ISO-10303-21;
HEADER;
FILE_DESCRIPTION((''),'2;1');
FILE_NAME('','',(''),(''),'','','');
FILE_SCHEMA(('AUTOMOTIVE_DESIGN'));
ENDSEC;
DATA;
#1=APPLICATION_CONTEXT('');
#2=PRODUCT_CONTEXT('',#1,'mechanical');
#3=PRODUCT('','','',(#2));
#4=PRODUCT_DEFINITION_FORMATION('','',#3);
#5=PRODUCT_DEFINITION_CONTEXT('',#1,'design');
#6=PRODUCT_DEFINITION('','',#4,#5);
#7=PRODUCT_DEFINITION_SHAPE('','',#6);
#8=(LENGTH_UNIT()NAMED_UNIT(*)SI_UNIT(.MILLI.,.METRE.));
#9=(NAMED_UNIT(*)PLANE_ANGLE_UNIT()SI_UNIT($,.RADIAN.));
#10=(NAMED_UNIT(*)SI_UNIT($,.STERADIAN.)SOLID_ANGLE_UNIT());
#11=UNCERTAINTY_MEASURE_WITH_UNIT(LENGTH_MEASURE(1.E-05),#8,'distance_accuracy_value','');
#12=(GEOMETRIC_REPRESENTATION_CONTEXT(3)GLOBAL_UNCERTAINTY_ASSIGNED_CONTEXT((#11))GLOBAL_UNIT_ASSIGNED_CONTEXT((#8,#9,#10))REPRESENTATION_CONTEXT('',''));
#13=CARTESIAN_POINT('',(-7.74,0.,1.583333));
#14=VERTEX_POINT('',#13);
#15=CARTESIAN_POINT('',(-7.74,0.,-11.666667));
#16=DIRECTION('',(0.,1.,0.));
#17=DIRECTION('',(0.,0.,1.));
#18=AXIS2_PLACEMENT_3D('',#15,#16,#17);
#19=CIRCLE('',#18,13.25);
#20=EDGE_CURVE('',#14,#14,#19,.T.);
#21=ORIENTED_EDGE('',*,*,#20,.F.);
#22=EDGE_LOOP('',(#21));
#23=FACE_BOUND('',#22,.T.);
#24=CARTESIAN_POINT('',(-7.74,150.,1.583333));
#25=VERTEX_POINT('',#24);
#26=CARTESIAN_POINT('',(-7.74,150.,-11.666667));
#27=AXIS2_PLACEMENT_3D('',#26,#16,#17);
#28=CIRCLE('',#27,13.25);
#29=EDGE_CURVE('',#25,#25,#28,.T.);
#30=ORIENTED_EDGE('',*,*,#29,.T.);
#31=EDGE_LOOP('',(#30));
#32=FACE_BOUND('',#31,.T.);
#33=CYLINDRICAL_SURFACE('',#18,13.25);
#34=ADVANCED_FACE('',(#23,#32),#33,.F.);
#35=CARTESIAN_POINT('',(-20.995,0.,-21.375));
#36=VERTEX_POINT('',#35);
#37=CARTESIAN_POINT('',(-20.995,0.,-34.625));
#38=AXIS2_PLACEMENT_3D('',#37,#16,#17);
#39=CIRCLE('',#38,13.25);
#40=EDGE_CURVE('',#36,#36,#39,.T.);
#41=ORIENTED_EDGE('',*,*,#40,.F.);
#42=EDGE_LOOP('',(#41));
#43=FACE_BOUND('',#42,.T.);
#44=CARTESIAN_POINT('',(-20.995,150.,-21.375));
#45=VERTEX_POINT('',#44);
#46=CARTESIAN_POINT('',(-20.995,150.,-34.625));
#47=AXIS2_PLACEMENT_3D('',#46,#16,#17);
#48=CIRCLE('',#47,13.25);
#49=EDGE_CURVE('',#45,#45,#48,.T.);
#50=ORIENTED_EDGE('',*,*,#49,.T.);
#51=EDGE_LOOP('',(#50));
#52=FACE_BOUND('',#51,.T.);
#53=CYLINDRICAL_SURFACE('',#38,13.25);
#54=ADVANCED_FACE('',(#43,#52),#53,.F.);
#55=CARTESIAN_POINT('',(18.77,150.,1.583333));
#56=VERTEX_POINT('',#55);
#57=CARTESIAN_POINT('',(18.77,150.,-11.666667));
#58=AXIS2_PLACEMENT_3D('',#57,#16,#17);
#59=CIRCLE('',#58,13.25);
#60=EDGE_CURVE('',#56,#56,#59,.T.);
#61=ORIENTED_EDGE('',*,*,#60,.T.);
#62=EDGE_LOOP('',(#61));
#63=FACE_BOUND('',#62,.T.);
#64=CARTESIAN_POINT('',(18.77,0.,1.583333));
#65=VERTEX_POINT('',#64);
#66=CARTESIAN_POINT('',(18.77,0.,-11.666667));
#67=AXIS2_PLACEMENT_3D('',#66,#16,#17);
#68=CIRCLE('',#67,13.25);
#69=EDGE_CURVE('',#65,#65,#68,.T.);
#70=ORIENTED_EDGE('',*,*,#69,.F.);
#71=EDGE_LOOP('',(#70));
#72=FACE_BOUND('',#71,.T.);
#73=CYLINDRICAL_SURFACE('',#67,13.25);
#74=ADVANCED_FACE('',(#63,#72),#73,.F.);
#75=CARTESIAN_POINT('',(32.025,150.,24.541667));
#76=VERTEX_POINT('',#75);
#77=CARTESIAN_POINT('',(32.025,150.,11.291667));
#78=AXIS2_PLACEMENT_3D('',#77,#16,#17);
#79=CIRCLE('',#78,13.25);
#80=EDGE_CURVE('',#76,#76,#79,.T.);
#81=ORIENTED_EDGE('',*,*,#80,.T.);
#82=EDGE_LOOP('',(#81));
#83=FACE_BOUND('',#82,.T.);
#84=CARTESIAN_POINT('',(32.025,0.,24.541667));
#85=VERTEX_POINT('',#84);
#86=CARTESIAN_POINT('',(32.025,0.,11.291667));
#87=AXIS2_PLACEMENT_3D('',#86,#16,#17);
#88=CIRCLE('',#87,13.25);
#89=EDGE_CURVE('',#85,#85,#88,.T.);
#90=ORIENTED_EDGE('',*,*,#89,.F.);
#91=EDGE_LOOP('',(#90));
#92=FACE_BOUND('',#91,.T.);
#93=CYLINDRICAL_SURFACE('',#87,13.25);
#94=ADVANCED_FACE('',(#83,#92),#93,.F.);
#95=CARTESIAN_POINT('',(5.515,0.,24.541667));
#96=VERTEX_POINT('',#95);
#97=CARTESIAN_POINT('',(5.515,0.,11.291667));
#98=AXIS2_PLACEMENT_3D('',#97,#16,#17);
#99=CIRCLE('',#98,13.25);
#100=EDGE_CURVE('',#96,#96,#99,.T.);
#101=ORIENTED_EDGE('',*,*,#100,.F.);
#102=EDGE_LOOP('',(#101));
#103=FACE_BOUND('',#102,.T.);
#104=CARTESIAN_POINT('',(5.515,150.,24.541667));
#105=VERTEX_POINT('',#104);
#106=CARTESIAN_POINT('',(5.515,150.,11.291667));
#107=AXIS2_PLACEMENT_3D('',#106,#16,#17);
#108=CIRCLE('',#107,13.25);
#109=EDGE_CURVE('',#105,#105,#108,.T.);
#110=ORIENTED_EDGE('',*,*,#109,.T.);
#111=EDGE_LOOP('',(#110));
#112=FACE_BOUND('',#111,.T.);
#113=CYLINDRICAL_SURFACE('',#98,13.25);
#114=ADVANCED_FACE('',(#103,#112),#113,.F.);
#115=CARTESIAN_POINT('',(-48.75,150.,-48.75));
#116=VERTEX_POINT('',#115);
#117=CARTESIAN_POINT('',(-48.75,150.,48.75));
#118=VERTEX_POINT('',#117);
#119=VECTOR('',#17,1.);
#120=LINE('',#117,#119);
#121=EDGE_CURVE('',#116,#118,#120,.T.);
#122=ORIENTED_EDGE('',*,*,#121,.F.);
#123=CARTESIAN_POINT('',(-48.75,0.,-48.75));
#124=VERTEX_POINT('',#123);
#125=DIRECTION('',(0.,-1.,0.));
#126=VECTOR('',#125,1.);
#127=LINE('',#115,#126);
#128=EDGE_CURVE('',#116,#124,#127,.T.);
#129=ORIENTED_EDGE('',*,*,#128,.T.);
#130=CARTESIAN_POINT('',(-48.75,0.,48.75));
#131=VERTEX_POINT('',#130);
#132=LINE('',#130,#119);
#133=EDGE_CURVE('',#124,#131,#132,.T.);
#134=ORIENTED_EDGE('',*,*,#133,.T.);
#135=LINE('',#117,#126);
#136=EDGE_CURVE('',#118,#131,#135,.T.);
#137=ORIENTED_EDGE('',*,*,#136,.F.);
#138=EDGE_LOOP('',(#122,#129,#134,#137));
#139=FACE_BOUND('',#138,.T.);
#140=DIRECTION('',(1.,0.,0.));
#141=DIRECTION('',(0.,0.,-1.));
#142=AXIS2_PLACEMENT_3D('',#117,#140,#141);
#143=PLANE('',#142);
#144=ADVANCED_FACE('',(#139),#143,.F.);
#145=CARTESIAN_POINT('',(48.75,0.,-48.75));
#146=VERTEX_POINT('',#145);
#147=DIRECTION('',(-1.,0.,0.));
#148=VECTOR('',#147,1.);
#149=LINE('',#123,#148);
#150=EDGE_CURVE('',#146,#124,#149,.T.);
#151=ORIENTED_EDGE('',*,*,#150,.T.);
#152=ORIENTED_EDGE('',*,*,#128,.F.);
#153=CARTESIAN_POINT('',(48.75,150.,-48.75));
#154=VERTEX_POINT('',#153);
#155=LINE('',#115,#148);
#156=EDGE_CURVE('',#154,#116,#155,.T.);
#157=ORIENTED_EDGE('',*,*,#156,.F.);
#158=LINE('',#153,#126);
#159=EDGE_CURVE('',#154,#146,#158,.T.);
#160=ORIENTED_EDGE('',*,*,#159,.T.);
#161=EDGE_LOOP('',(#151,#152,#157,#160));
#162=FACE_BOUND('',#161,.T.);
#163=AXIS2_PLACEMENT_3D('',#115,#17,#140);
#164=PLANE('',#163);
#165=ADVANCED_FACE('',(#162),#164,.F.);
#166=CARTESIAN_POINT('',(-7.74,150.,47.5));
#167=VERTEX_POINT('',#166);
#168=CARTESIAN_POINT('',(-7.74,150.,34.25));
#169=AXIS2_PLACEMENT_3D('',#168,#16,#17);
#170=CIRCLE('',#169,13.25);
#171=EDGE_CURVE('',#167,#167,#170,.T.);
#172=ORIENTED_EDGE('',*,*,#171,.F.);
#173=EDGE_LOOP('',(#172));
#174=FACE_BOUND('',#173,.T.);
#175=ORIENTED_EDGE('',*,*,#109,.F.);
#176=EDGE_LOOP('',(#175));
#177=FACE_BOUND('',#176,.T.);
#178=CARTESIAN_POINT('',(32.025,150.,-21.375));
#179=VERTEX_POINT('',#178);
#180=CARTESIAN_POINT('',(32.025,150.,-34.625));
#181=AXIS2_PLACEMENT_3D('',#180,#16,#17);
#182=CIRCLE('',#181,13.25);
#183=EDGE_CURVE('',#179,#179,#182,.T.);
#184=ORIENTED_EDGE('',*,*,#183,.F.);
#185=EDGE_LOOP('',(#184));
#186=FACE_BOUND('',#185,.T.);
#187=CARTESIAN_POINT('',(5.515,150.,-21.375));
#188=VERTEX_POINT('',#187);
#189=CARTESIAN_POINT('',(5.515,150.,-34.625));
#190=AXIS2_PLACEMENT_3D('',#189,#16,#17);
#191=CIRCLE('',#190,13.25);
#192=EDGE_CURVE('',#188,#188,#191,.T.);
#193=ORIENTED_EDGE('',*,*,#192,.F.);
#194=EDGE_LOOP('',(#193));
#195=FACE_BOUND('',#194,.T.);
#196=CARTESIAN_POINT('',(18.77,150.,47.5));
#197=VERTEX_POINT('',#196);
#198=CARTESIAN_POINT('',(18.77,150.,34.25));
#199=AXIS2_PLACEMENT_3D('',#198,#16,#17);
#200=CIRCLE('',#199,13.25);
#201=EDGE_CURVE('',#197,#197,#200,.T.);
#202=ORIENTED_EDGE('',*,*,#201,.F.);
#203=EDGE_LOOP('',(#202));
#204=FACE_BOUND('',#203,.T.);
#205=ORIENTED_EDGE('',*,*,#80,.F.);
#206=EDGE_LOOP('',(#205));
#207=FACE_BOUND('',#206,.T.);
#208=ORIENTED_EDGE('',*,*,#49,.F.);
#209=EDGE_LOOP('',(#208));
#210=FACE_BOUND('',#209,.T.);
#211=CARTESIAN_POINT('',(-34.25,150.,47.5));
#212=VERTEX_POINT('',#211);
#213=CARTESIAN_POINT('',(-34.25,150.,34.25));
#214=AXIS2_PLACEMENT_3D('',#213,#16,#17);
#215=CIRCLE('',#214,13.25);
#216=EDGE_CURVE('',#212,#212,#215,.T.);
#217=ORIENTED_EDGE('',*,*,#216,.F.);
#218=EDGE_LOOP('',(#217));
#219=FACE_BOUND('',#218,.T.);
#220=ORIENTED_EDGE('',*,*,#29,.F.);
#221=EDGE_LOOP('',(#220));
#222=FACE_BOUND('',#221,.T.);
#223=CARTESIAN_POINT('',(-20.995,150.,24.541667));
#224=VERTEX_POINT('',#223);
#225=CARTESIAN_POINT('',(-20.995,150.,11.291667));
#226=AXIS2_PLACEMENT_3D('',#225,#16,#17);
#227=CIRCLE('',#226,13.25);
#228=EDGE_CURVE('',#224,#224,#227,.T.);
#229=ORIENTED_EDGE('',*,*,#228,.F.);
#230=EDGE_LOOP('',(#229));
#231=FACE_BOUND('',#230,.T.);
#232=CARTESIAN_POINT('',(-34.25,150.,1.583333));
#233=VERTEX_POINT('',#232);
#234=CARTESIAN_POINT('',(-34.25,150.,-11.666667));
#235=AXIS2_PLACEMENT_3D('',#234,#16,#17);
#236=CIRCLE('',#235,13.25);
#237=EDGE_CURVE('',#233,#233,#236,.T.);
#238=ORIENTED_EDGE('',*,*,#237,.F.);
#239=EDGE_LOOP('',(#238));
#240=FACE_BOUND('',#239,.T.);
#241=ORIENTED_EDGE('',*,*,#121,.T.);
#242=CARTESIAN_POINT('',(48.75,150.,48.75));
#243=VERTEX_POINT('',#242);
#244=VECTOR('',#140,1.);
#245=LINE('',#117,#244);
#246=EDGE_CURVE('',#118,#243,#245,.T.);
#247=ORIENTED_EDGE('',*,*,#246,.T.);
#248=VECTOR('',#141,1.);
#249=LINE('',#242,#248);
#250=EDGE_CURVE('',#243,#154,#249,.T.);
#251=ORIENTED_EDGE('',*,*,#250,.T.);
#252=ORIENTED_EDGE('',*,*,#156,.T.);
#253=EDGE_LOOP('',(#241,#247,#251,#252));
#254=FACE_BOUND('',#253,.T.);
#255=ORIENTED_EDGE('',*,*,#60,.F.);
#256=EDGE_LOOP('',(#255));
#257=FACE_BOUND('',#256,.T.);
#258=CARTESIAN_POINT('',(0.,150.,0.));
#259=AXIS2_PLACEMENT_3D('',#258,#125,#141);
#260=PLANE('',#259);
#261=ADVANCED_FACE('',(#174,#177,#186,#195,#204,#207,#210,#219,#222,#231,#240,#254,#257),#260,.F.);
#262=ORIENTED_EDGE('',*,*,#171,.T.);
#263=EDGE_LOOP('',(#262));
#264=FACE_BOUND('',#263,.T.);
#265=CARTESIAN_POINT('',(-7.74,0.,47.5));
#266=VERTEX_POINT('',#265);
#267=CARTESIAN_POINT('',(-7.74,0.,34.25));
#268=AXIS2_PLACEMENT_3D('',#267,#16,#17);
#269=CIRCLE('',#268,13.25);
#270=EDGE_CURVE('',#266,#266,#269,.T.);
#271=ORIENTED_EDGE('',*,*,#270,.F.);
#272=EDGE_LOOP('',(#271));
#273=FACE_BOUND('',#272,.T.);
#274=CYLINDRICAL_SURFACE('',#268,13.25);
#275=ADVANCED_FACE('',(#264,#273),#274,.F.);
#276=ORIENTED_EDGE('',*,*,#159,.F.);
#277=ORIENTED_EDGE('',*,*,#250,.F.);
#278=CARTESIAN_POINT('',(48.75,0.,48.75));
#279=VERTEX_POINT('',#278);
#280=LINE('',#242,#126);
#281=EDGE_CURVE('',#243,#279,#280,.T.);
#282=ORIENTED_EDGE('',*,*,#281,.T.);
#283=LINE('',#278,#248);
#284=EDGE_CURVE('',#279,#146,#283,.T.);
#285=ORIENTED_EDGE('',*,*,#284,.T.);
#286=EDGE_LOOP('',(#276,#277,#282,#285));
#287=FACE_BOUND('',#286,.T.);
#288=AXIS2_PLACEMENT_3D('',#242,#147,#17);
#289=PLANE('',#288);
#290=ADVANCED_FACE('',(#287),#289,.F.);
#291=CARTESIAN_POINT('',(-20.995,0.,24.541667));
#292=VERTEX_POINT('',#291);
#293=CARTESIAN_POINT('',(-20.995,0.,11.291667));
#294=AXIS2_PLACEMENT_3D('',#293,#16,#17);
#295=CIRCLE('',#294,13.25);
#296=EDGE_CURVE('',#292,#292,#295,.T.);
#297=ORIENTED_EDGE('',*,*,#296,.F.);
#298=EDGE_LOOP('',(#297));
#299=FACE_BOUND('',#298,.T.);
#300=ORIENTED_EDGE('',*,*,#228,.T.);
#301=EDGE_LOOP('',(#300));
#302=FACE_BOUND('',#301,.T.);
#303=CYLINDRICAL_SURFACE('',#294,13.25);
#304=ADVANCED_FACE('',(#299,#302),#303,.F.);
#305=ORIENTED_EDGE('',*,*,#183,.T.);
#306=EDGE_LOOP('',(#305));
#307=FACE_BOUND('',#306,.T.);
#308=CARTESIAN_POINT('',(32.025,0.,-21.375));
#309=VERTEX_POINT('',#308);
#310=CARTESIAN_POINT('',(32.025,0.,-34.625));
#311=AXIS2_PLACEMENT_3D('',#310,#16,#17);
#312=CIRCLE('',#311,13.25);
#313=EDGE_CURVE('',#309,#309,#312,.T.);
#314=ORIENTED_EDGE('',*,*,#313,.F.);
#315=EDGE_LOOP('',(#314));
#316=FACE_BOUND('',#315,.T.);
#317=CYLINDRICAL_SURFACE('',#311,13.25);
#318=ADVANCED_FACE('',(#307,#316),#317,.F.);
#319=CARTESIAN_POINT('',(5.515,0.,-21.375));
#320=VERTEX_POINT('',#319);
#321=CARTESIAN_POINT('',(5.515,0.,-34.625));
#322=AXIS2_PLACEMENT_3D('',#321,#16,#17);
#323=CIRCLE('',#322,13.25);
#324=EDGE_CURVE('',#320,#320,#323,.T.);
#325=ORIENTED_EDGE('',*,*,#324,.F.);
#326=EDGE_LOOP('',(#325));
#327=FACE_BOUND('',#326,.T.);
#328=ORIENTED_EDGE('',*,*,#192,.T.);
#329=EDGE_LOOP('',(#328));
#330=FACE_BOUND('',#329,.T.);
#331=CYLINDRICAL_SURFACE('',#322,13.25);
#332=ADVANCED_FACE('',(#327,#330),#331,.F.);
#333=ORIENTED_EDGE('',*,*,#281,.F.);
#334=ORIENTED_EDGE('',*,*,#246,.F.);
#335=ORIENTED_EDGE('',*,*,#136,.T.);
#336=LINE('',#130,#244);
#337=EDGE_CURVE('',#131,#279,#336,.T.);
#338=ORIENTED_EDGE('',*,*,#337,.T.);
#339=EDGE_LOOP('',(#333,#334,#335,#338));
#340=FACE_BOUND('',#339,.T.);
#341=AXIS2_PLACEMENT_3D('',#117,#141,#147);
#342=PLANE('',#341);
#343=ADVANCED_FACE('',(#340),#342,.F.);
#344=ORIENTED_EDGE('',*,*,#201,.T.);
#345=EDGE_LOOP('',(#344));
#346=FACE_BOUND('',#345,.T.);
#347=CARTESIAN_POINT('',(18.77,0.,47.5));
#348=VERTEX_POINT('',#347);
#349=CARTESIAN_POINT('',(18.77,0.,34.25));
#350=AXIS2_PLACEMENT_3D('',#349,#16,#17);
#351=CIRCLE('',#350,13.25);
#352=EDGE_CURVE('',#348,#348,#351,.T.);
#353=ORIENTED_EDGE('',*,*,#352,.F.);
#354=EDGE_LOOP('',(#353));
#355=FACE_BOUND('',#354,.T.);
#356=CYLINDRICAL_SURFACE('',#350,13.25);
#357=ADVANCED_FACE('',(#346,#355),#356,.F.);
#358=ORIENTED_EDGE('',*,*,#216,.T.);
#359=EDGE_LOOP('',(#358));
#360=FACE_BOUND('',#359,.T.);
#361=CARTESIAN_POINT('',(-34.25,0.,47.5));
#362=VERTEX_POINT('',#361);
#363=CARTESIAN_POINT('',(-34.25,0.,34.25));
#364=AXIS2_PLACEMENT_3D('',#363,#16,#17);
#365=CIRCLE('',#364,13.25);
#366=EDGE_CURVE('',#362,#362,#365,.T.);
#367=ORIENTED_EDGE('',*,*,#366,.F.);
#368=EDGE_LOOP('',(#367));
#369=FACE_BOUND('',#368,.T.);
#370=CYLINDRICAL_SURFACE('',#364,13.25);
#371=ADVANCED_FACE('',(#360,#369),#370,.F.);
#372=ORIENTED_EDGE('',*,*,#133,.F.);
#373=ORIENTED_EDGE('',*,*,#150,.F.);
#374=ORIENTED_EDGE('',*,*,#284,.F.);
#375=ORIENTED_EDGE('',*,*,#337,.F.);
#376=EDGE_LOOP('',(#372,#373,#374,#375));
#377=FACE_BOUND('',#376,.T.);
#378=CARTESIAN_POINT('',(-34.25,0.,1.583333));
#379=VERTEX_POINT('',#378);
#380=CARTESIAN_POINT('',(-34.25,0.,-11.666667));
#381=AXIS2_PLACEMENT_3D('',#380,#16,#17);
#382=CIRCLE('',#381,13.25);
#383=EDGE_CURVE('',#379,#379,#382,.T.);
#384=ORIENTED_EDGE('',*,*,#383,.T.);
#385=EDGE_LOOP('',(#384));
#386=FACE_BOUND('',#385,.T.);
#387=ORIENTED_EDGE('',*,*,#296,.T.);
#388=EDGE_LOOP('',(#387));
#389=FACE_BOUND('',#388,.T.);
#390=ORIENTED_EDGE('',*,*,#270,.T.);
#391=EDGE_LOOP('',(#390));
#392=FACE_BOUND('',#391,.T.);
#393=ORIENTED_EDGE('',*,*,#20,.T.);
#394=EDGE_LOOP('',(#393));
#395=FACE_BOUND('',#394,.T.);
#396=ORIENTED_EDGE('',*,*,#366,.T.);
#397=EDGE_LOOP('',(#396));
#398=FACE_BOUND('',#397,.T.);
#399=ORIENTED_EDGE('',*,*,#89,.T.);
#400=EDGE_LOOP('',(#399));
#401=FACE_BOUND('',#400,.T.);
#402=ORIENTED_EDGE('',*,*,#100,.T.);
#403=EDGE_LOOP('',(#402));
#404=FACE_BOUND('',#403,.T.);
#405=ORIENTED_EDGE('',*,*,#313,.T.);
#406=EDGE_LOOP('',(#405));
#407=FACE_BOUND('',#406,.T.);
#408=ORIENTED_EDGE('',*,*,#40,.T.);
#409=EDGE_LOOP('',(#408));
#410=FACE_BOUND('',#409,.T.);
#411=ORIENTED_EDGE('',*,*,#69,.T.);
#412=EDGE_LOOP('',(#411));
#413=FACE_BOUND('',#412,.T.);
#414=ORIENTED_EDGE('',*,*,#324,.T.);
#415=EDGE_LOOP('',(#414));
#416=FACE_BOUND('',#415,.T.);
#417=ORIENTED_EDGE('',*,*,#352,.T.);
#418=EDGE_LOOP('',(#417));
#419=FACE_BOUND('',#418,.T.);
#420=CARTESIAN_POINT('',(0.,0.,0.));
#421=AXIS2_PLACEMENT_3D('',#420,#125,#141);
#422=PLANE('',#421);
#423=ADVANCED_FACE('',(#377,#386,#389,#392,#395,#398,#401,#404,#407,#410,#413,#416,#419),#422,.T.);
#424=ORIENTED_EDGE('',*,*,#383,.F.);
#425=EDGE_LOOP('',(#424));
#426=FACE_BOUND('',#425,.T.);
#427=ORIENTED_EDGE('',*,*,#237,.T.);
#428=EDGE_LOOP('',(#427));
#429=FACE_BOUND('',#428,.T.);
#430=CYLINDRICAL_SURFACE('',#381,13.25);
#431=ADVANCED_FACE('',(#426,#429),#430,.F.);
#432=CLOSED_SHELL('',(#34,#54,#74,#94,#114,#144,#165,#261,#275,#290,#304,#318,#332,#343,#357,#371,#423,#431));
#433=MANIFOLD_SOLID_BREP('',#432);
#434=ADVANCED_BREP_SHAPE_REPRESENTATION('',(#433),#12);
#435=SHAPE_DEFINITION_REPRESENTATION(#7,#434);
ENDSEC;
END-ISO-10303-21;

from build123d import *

# Parameters (mm, degrees)
SKETCH1_W               = 97.5
SKETCH1_H               = 97.5
BOSS_EXTRUDE1_DEPTH     = 150
SKETCH5_R               = 13.25
CUT_EXTRUDE5_DEPTH      = 166.085205273
FILL_PATTERN1_OUTLINE_R = 13.25
FILL_PATTERN1_DEPTH     = 150


# Read off the part's stored shape, not the designer's step: Fill Pattern1
with BuildPart() as part:
    # Sketch1 → Boss-Extrude1 (new body)
    with BuildSketch(Plane(origin=(0, 0, 0), x_dir=(1, 0, 0), z_dir=(0, 1, 0))):
        Rectangle(SKETCH1_W, SKETCH1_H)
    extrude(amount=BOSS_EXTRUDE1_DEPTH)

    # Sketch5 → Cut-Extrude5 (cut, through all)
    with BuildSketch(Plane(origin=(0, 150, 0), x_dir=(1, 0, 0), z_dir=(0, 1, 0))):
        with Locations(Location((-34.25, -34.25, 0), (0, 0, 270))):
            Circle(SKETCH5_R)
    extrude(amount=-CUT_EXTRUDE5_DEPTH, mode=Mode.SUBTRACT)

    # Fill Pattern1 outline → Fill Pattern1 (cut)
    with BuildSketch(Plane(origin=(0, 0, 0), x_dir=(1, 0, 0), z_dir=(0, 1, 0))):
        with Locations((32.025, 34.625000363)):
            Circle(FILL_PATTERN1_OUTLINE_R)
        with Locations((32.025, -11.291666546)):
            Circle(FILL_PATTERN1_OUTLINE_R)
        with Locations((18.77, 11.666666909)):
            Circle(FILL_PATTERN1_OUTLINE_R)
        with Locations((5.515, 34.625000363)):
            Circle(FILL_PATTERN1_OUTLINE_R)
        with Locations((18.77, -34.25)):
            Circle(FILL_PATTERN1_OUTLINE_R)
        with Locations((5.515, -11.291666546)):
            Circle(FILL_PATTERN1_OUTLINE_R)
        with Locations((-7.74, 11.666666909)):
            Circle(FILL_PATTERN1_OUTLINE_R)
        with Locations((-20.995, 34.625000363)):
            Circle(FILL_PATTERN1_OUTLINE_R)
        with Locations((-7.74, -34.25)):
            Circle(FILL_PATTERN1_OUTLINE_R)
        with Locations((-20.995, -11.291666546)):
            Circle(FILL_PATTERN1_OUTLINE_R)
        with Locations((-34.25, 11.666666909)):
            Circle(FILL_PATTERN1_OUTLINE_R)
    extrude(amount=FILL_PATTERN1_DEPTH, mode=Mode.SUBTRACT)


solid = part.part
